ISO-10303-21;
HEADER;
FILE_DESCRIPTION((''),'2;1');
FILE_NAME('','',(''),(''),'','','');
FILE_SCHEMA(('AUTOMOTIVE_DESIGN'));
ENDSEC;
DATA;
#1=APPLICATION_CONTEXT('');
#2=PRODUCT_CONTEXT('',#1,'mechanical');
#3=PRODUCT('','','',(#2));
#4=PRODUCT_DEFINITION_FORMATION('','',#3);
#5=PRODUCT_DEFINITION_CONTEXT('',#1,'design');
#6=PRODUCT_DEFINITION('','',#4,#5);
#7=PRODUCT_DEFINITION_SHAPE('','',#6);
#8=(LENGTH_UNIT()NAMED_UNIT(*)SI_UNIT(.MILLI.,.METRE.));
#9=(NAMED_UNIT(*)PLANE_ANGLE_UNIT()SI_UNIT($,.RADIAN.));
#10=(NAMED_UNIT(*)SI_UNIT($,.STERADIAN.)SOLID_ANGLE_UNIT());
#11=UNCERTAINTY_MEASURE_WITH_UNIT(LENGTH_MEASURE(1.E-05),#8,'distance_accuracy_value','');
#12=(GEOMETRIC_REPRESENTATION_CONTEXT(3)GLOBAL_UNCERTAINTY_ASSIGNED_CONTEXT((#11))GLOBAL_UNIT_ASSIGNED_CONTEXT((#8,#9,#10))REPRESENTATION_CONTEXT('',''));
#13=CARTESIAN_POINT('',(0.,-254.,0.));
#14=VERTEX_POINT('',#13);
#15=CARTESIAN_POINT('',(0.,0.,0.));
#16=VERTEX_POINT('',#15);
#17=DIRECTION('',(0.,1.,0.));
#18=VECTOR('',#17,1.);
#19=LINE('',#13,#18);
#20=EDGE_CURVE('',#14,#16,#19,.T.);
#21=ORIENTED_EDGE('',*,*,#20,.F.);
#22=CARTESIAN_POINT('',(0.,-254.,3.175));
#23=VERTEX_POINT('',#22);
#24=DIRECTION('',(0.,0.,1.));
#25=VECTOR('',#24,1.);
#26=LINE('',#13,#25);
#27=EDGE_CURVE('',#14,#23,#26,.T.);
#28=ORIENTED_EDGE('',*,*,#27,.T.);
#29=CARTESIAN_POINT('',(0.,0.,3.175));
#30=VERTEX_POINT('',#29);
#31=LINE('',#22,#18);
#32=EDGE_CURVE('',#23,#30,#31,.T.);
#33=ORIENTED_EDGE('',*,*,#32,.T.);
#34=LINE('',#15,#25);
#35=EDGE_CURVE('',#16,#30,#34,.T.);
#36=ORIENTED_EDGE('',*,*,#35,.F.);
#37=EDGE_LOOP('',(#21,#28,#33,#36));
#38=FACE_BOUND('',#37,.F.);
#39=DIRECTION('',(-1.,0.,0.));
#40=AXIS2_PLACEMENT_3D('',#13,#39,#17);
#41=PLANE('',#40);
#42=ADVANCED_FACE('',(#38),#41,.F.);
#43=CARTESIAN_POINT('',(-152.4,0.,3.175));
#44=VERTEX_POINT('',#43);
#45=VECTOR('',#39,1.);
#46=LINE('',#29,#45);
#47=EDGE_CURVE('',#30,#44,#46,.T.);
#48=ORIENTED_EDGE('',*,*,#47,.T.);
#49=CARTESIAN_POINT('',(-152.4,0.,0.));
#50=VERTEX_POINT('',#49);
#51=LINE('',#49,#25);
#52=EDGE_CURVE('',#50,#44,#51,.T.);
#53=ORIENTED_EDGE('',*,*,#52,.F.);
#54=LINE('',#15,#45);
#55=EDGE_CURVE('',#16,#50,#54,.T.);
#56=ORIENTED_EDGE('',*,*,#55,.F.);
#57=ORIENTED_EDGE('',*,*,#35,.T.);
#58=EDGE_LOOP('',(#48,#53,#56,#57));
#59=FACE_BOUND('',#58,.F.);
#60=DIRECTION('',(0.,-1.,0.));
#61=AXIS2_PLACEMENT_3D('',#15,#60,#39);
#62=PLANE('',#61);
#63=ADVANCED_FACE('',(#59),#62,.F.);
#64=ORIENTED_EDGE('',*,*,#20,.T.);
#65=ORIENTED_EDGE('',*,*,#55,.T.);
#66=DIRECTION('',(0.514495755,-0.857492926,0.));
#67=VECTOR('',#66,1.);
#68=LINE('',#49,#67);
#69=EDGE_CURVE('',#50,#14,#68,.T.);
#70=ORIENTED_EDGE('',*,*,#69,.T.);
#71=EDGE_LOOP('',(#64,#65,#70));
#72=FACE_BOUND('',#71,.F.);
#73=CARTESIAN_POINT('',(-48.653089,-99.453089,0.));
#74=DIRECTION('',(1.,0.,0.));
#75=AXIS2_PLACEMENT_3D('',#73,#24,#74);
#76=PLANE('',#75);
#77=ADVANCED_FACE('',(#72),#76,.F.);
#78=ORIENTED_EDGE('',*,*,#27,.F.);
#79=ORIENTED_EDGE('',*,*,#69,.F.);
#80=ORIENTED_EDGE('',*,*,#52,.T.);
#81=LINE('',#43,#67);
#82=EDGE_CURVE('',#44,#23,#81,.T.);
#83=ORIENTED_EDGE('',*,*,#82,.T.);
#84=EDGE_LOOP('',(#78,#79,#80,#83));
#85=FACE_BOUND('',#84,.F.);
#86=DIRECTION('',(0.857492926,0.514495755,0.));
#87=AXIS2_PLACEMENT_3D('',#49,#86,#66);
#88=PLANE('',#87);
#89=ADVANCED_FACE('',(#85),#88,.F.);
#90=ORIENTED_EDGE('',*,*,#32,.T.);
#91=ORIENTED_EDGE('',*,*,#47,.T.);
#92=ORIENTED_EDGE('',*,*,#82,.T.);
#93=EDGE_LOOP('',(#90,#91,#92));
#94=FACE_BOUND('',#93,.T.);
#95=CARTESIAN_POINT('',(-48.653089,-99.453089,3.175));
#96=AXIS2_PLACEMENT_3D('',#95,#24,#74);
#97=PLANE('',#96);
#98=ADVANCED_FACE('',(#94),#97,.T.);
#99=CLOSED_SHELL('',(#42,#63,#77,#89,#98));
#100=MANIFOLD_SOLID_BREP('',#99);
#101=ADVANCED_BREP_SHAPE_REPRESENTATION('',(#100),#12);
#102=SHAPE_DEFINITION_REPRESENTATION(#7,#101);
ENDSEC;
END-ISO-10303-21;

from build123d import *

# Parameters (mm, degrees)
F1_DEPTH = 3.175


# Not quite as in the source:
# - a length typed as a fraction of an inch, garbled in the dataset ("3 / 203.2 mm" for 3/8 in), is restored


with BuildPart() as f1:
    # F0 (on Top) → F1 (new body)
    with BuildSketch(Plane.XY):
        Polygon((0, -254), (0, 0), (-152.4, 0), align=None)
    extrude(amount=F1_DEPTH)


solid = f1.part
